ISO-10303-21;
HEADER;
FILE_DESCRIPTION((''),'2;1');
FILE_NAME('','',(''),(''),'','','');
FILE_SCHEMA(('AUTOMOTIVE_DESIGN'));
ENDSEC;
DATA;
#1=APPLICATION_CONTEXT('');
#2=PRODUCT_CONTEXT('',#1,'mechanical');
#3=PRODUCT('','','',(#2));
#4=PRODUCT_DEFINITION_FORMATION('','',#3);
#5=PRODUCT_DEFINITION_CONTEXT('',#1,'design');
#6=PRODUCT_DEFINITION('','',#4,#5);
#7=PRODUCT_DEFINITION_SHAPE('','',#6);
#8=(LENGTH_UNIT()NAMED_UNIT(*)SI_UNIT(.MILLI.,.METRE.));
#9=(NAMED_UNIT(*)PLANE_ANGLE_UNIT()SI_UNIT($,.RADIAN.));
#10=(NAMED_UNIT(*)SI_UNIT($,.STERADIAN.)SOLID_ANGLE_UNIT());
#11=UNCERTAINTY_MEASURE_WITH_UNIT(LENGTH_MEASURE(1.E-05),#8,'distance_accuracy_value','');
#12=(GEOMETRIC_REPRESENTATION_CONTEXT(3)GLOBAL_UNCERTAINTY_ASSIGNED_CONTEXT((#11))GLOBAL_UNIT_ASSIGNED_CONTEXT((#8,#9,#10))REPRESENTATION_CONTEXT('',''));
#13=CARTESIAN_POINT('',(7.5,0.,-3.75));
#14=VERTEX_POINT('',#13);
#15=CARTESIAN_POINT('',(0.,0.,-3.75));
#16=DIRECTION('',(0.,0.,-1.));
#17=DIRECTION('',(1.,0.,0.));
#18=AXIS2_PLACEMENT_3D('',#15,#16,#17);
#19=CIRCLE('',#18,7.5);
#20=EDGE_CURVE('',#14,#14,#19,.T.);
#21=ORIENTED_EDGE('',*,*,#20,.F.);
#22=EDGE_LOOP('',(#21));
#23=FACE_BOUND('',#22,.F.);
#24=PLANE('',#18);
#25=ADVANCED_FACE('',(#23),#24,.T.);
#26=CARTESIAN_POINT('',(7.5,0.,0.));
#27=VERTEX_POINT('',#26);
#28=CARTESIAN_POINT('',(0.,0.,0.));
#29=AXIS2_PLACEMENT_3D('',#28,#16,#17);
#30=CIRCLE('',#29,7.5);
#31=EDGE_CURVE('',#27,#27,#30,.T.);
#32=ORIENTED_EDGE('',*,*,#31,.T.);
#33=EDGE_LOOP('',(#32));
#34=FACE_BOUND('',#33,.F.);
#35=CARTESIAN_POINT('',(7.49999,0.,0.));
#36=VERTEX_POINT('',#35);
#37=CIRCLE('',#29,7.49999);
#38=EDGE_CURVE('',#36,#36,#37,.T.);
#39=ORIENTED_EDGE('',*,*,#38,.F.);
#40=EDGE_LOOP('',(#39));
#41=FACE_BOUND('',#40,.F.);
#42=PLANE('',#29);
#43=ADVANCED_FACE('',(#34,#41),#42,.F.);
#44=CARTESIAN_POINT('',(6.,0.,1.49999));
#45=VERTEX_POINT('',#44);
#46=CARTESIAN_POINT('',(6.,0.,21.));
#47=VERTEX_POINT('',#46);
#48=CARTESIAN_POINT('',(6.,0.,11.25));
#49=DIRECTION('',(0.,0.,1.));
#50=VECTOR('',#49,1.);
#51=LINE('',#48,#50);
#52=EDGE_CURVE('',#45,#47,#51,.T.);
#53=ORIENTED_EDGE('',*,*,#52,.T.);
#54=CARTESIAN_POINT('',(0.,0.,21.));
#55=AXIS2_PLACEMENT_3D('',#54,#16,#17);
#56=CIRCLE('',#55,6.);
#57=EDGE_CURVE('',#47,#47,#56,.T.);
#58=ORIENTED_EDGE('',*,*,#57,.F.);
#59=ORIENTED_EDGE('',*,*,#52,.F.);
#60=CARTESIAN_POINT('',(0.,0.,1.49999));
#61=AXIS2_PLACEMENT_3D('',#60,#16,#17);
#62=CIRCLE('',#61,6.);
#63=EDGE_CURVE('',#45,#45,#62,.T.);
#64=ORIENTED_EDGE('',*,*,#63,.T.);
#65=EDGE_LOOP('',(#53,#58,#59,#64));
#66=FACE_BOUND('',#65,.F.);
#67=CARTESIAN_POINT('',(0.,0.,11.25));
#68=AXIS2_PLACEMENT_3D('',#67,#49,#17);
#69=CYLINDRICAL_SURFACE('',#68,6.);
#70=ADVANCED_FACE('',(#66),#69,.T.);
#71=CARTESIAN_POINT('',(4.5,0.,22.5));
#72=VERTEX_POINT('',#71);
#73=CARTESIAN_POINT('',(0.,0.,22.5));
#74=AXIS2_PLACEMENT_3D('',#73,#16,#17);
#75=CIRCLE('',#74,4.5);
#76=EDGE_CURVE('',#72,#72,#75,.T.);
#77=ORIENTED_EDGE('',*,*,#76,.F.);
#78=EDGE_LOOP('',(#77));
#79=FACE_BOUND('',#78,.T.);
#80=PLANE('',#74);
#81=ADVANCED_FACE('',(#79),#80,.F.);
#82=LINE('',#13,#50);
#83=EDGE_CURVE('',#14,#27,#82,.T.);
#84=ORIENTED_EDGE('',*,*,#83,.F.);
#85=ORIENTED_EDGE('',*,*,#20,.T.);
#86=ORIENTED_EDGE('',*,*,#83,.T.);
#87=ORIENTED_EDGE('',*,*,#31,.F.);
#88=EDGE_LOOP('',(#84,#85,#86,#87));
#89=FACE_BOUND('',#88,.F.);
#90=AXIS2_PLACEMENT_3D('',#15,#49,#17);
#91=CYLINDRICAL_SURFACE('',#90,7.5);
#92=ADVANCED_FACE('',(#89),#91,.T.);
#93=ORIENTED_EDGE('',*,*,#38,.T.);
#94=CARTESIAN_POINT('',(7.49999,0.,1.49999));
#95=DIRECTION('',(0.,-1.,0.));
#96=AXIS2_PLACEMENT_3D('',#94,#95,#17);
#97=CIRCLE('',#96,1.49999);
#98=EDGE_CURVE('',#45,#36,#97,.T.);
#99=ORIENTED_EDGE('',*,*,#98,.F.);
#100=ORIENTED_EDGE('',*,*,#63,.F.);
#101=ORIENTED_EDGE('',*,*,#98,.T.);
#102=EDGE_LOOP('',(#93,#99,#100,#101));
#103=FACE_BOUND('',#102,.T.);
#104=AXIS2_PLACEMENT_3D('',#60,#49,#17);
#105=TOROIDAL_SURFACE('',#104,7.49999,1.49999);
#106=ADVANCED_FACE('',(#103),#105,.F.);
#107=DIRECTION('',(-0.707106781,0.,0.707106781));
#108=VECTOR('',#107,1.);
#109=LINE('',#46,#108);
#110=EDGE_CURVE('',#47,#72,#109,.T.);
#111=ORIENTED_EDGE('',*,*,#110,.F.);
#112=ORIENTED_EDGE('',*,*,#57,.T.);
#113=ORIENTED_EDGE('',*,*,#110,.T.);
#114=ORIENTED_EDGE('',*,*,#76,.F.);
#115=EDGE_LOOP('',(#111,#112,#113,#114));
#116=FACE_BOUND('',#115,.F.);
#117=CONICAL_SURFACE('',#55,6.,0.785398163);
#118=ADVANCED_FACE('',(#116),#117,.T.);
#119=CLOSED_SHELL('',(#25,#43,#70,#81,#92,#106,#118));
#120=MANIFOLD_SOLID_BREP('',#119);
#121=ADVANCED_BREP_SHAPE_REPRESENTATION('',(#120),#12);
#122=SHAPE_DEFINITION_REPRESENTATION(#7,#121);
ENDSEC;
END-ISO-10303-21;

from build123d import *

# Parameters (mm, degrees)
F0_W    = 6
F0_H    = 22.5
F2_SIZE = 1.5
F3_R    = 1.49999


# Not quite as in the source:
# - a fillet or chamfer is up to 0.001 mm smaller than in the source, because OpenCascade refuses the exact size


with BuildPart() as f1:
    # F0 (on Front) → F1 (revolve)
    with BuildSketch(Plane.XZ):
        with Locations((3, 11.25)):
            Rectangle(F0_W, F0_H)
        Polygon((6, 0), (0, 0), (0, -3.75), (7.5, -3.75), (7.5, 0), align=None)
    revolve(axis=Axis((0, 0, 8.5798527999), (0, 0, -1)))

    # F2
    f2_edges = [f1.edges().sort_by_distance(p)[0] for p in [
        (-6, 0, 22.5),
    ]]
    chamfer(f2_edges, length=F2_SIZE)

    # F3 (radius 1.5 in the source; OpenCascade refuses exactly that, so slightly less here)
    f3_edges = [f1.edges().sort_by_distance(p)[0] for p in [
        (-6, 0, 0),
    ]]
    fillet(f3_edges, radius=F3_R)


solid = f1.part
